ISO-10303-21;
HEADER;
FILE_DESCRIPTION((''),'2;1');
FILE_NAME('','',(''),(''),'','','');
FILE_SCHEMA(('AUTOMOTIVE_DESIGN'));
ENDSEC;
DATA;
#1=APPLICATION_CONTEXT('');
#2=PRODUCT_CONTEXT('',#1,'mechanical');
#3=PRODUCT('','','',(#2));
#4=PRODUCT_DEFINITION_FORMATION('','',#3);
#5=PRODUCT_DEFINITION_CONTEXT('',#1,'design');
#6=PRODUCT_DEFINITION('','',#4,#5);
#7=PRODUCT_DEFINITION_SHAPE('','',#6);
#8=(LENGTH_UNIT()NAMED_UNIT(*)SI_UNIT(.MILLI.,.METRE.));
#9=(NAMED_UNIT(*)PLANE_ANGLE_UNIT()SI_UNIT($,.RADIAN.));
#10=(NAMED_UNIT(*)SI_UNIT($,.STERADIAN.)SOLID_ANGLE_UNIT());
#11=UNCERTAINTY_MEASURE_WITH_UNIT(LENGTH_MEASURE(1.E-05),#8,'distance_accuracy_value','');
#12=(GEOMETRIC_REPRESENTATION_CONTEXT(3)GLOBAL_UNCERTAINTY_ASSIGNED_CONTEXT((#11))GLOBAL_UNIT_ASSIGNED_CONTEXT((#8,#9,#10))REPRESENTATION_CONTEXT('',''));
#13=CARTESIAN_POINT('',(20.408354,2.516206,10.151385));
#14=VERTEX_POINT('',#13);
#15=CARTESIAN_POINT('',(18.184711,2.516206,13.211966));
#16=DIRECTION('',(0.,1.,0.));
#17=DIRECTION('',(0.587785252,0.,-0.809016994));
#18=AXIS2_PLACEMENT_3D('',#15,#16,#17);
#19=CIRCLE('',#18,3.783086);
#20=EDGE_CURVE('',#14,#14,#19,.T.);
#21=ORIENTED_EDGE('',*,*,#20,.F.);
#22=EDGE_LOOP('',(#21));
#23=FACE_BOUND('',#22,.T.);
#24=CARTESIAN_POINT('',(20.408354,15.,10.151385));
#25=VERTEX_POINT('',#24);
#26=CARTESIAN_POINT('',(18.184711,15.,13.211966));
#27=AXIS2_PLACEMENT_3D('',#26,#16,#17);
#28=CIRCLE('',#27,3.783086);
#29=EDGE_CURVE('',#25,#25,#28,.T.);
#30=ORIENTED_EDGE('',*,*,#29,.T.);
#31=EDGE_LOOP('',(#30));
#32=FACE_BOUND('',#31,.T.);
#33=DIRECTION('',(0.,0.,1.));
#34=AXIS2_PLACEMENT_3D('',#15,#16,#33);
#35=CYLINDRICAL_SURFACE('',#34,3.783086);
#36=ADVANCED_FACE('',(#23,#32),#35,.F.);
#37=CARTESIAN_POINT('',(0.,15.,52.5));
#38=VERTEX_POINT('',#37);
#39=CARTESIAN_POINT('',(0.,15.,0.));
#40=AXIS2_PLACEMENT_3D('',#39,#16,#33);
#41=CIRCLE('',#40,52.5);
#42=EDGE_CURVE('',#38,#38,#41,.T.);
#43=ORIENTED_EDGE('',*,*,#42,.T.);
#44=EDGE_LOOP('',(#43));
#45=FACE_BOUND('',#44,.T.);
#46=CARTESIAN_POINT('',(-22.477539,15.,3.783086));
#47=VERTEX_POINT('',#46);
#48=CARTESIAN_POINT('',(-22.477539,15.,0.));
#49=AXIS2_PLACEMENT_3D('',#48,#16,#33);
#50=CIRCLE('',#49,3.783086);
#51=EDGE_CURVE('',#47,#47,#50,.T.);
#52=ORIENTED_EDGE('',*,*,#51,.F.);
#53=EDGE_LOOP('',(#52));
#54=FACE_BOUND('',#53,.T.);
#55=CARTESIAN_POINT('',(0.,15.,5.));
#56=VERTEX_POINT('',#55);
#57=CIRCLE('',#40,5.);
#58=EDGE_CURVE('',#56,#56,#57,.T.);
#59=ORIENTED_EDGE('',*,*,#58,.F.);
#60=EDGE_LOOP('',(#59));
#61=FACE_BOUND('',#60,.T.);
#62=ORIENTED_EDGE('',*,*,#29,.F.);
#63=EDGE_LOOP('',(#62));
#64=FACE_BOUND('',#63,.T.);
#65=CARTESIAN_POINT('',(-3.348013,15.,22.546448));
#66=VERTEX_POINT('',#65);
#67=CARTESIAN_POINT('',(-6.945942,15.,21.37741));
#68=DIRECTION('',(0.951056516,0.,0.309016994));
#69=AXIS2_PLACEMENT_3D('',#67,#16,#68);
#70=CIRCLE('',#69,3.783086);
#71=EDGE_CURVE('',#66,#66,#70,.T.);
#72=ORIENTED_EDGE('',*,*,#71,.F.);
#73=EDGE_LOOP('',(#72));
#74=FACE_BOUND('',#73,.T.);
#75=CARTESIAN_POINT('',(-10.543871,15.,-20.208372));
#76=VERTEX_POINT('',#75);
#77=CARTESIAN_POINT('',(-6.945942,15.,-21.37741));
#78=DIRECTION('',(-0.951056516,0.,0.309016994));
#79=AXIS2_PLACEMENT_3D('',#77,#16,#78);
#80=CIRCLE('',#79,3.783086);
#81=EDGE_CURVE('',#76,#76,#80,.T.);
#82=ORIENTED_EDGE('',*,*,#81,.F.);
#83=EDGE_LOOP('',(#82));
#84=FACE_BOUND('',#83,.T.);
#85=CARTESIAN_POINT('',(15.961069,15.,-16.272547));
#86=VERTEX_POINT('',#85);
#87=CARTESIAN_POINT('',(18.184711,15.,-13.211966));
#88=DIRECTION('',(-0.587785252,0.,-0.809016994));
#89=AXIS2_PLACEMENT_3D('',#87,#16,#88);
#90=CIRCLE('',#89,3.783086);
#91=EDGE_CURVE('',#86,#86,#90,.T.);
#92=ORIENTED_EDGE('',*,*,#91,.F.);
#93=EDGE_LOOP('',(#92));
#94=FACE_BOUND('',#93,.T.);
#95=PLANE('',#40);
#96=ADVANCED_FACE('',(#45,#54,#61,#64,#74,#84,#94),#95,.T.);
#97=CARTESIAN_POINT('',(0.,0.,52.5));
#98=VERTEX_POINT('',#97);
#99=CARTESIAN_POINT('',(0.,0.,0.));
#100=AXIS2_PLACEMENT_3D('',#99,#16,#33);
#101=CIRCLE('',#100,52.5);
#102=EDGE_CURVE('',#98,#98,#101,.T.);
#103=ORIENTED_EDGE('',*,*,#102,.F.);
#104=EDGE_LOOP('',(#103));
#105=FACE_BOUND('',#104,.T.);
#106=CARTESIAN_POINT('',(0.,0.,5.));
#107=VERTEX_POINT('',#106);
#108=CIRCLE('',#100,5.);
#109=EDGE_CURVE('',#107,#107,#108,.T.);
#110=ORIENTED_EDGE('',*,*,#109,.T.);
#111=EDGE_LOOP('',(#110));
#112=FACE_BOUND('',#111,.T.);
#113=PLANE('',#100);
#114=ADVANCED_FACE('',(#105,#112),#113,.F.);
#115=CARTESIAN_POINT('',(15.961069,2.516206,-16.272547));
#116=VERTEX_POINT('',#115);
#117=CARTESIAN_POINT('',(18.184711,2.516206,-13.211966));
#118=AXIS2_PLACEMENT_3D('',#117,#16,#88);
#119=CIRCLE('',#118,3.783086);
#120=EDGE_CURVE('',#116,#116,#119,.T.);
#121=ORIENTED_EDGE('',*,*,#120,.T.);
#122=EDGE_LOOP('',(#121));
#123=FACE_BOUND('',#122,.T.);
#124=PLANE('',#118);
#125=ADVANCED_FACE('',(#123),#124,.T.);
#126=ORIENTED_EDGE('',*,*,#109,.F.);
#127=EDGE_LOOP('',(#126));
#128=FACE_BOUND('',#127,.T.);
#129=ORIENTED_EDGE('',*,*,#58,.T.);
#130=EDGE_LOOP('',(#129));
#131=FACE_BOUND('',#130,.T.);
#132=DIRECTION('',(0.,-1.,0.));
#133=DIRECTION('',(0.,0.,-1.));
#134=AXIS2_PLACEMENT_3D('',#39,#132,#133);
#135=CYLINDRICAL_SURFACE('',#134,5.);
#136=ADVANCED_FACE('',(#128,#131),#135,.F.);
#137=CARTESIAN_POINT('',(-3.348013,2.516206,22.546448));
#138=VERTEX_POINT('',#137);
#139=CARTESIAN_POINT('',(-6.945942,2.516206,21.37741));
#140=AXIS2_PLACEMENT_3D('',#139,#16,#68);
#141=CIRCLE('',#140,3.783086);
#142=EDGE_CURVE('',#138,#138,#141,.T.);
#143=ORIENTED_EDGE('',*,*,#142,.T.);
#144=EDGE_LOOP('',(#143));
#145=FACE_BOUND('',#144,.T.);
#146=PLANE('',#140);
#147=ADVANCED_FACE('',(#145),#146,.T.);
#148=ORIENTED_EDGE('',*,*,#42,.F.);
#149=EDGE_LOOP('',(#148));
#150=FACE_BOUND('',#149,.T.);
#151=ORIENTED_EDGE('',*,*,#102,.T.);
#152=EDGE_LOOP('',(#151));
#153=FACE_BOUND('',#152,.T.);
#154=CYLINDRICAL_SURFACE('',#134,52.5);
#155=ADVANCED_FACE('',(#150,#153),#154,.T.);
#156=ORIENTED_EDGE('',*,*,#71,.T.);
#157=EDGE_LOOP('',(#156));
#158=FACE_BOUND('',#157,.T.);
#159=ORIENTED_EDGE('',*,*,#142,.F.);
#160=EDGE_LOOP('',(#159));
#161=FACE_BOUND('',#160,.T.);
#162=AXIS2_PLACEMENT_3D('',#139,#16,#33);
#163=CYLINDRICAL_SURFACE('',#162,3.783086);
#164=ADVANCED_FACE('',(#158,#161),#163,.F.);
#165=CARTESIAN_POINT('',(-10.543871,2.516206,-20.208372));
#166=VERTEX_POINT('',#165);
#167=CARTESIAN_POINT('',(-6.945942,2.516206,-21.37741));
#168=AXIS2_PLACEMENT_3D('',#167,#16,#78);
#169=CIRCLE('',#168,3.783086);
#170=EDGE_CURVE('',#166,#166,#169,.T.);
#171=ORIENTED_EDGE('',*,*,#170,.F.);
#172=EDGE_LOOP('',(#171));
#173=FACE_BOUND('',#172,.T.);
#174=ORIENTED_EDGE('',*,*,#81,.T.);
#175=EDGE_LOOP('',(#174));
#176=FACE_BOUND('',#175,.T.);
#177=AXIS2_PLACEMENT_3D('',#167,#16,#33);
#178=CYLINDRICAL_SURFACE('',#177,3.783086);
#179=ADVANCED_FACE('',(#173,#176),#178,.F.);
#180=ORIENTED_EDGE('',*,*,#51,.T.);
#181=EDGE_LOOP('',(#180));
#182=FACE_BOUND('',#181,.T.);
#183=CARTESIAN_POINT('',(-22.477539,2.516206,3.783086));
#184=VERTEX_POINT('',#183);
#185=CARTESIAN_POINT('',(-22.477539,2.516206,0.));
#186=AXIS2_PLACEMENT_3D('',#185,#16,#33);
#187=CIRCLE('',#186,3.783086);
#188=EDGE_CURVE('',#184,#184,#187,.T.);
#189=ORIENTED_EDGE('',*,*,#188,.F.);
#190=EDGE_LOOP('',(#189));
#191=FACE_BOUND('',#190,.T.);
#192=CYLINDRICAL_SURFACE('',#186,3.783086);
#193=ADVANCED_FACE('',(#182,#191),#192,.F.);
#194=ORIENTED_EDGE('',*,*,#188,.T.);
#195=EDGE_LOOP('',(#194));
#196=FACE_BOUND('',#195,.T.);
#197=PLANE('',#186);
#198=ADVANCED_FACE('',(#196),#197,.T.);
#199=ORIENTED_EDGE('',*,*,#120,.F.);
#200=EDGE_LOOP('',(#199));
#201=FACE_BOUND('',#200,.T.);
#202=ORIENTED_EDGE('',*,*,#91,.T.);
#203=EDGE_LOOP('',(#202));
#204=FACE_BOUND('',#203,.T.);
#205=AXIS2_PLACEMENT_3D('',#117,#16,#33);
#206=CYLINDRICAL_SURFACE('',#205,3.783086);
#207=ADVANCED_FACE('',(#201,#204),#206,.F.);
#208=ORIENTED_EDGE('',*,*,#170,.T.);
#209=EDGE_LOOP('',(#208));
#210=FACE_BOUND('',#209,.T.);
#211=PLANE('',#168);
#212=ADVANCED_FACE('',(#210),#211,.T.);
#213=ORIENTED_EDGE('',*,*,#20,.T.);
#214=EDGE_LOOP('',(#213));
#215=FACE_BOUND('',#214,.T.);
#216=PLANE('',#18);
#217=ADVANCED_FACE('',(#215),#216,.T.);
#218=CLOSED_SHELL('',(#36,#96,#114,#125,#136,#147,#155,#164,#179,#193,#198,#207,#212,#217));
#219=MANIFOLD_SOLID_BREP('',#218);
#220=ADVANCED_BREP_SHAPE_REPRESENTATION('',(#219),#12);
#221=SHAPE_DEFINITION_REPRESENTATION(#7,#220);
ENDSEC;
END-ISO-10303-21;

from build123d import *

# Parameters (mm, degrees)
SKETCH1_R           = 52.5
BOSS_EXTRUDE1_DEPTH = 15
SKETCH2_R           = 5
CUT_EXTRUDE1_DEPTH  = 76.746287038
SKETCH3_R           = 3.783086328
CUT_EXTRUDE2_DEPTH  = 12.483793899
CIRPATTERN1_COUNT   = 5


with BuildPart() as part:
    # Sketch1 → Boss-Extrude1 (new body)
    with BuildSketch(Plane(origin=(0, 0, 0), x_dir=(1, 0, 0), z_dir=(0, 1, 0))):
        Circle(SKETCH1_R)
    extrude(amount=BOSS_EXTRUDE1_DEPTH)

    # Sketch2 → Cut-Extrude1 (cut, through all)
    with BuildSketch(Plane(origin=(0, 0, 0), x_dir=(1, 0, 0), z_dir=(0, 1, 0))):
        Circle(SKETCH2_R)
    extrude(amount=CUT_EXTRUDE1_DEPTH, mode=Mode.SUBTRACT)

    # Sketch3 → Cut-Extrude2 (cut)
    with BuildSketch(Plane(origin=(0, 15, 0), x_dir=(1, 0, 0), z_dir=(0, 1, 0))):
        with Locations((-22.477539281, 0)):
            Circle(SKETCH3_R)
    cut_extrude2 = extrude(amount=-CUT_EXTRUDE2_DEPTH, mode=Mode.SUBTRACT)

    # CirPattern1: Cut-Extrude2 ×5 about axis
    cirpattern1_axis = Axis((0, 0, 0), (0, 1, 0))
    for i in range(1, CIRPATTERN1_COUNT):
        add(cut_extrude2.rotate(cirpattern1_axis, i * 360 / CIRPATTERN1_COUNT), mode=Mode.SUBTRACT)


solid = part.part
